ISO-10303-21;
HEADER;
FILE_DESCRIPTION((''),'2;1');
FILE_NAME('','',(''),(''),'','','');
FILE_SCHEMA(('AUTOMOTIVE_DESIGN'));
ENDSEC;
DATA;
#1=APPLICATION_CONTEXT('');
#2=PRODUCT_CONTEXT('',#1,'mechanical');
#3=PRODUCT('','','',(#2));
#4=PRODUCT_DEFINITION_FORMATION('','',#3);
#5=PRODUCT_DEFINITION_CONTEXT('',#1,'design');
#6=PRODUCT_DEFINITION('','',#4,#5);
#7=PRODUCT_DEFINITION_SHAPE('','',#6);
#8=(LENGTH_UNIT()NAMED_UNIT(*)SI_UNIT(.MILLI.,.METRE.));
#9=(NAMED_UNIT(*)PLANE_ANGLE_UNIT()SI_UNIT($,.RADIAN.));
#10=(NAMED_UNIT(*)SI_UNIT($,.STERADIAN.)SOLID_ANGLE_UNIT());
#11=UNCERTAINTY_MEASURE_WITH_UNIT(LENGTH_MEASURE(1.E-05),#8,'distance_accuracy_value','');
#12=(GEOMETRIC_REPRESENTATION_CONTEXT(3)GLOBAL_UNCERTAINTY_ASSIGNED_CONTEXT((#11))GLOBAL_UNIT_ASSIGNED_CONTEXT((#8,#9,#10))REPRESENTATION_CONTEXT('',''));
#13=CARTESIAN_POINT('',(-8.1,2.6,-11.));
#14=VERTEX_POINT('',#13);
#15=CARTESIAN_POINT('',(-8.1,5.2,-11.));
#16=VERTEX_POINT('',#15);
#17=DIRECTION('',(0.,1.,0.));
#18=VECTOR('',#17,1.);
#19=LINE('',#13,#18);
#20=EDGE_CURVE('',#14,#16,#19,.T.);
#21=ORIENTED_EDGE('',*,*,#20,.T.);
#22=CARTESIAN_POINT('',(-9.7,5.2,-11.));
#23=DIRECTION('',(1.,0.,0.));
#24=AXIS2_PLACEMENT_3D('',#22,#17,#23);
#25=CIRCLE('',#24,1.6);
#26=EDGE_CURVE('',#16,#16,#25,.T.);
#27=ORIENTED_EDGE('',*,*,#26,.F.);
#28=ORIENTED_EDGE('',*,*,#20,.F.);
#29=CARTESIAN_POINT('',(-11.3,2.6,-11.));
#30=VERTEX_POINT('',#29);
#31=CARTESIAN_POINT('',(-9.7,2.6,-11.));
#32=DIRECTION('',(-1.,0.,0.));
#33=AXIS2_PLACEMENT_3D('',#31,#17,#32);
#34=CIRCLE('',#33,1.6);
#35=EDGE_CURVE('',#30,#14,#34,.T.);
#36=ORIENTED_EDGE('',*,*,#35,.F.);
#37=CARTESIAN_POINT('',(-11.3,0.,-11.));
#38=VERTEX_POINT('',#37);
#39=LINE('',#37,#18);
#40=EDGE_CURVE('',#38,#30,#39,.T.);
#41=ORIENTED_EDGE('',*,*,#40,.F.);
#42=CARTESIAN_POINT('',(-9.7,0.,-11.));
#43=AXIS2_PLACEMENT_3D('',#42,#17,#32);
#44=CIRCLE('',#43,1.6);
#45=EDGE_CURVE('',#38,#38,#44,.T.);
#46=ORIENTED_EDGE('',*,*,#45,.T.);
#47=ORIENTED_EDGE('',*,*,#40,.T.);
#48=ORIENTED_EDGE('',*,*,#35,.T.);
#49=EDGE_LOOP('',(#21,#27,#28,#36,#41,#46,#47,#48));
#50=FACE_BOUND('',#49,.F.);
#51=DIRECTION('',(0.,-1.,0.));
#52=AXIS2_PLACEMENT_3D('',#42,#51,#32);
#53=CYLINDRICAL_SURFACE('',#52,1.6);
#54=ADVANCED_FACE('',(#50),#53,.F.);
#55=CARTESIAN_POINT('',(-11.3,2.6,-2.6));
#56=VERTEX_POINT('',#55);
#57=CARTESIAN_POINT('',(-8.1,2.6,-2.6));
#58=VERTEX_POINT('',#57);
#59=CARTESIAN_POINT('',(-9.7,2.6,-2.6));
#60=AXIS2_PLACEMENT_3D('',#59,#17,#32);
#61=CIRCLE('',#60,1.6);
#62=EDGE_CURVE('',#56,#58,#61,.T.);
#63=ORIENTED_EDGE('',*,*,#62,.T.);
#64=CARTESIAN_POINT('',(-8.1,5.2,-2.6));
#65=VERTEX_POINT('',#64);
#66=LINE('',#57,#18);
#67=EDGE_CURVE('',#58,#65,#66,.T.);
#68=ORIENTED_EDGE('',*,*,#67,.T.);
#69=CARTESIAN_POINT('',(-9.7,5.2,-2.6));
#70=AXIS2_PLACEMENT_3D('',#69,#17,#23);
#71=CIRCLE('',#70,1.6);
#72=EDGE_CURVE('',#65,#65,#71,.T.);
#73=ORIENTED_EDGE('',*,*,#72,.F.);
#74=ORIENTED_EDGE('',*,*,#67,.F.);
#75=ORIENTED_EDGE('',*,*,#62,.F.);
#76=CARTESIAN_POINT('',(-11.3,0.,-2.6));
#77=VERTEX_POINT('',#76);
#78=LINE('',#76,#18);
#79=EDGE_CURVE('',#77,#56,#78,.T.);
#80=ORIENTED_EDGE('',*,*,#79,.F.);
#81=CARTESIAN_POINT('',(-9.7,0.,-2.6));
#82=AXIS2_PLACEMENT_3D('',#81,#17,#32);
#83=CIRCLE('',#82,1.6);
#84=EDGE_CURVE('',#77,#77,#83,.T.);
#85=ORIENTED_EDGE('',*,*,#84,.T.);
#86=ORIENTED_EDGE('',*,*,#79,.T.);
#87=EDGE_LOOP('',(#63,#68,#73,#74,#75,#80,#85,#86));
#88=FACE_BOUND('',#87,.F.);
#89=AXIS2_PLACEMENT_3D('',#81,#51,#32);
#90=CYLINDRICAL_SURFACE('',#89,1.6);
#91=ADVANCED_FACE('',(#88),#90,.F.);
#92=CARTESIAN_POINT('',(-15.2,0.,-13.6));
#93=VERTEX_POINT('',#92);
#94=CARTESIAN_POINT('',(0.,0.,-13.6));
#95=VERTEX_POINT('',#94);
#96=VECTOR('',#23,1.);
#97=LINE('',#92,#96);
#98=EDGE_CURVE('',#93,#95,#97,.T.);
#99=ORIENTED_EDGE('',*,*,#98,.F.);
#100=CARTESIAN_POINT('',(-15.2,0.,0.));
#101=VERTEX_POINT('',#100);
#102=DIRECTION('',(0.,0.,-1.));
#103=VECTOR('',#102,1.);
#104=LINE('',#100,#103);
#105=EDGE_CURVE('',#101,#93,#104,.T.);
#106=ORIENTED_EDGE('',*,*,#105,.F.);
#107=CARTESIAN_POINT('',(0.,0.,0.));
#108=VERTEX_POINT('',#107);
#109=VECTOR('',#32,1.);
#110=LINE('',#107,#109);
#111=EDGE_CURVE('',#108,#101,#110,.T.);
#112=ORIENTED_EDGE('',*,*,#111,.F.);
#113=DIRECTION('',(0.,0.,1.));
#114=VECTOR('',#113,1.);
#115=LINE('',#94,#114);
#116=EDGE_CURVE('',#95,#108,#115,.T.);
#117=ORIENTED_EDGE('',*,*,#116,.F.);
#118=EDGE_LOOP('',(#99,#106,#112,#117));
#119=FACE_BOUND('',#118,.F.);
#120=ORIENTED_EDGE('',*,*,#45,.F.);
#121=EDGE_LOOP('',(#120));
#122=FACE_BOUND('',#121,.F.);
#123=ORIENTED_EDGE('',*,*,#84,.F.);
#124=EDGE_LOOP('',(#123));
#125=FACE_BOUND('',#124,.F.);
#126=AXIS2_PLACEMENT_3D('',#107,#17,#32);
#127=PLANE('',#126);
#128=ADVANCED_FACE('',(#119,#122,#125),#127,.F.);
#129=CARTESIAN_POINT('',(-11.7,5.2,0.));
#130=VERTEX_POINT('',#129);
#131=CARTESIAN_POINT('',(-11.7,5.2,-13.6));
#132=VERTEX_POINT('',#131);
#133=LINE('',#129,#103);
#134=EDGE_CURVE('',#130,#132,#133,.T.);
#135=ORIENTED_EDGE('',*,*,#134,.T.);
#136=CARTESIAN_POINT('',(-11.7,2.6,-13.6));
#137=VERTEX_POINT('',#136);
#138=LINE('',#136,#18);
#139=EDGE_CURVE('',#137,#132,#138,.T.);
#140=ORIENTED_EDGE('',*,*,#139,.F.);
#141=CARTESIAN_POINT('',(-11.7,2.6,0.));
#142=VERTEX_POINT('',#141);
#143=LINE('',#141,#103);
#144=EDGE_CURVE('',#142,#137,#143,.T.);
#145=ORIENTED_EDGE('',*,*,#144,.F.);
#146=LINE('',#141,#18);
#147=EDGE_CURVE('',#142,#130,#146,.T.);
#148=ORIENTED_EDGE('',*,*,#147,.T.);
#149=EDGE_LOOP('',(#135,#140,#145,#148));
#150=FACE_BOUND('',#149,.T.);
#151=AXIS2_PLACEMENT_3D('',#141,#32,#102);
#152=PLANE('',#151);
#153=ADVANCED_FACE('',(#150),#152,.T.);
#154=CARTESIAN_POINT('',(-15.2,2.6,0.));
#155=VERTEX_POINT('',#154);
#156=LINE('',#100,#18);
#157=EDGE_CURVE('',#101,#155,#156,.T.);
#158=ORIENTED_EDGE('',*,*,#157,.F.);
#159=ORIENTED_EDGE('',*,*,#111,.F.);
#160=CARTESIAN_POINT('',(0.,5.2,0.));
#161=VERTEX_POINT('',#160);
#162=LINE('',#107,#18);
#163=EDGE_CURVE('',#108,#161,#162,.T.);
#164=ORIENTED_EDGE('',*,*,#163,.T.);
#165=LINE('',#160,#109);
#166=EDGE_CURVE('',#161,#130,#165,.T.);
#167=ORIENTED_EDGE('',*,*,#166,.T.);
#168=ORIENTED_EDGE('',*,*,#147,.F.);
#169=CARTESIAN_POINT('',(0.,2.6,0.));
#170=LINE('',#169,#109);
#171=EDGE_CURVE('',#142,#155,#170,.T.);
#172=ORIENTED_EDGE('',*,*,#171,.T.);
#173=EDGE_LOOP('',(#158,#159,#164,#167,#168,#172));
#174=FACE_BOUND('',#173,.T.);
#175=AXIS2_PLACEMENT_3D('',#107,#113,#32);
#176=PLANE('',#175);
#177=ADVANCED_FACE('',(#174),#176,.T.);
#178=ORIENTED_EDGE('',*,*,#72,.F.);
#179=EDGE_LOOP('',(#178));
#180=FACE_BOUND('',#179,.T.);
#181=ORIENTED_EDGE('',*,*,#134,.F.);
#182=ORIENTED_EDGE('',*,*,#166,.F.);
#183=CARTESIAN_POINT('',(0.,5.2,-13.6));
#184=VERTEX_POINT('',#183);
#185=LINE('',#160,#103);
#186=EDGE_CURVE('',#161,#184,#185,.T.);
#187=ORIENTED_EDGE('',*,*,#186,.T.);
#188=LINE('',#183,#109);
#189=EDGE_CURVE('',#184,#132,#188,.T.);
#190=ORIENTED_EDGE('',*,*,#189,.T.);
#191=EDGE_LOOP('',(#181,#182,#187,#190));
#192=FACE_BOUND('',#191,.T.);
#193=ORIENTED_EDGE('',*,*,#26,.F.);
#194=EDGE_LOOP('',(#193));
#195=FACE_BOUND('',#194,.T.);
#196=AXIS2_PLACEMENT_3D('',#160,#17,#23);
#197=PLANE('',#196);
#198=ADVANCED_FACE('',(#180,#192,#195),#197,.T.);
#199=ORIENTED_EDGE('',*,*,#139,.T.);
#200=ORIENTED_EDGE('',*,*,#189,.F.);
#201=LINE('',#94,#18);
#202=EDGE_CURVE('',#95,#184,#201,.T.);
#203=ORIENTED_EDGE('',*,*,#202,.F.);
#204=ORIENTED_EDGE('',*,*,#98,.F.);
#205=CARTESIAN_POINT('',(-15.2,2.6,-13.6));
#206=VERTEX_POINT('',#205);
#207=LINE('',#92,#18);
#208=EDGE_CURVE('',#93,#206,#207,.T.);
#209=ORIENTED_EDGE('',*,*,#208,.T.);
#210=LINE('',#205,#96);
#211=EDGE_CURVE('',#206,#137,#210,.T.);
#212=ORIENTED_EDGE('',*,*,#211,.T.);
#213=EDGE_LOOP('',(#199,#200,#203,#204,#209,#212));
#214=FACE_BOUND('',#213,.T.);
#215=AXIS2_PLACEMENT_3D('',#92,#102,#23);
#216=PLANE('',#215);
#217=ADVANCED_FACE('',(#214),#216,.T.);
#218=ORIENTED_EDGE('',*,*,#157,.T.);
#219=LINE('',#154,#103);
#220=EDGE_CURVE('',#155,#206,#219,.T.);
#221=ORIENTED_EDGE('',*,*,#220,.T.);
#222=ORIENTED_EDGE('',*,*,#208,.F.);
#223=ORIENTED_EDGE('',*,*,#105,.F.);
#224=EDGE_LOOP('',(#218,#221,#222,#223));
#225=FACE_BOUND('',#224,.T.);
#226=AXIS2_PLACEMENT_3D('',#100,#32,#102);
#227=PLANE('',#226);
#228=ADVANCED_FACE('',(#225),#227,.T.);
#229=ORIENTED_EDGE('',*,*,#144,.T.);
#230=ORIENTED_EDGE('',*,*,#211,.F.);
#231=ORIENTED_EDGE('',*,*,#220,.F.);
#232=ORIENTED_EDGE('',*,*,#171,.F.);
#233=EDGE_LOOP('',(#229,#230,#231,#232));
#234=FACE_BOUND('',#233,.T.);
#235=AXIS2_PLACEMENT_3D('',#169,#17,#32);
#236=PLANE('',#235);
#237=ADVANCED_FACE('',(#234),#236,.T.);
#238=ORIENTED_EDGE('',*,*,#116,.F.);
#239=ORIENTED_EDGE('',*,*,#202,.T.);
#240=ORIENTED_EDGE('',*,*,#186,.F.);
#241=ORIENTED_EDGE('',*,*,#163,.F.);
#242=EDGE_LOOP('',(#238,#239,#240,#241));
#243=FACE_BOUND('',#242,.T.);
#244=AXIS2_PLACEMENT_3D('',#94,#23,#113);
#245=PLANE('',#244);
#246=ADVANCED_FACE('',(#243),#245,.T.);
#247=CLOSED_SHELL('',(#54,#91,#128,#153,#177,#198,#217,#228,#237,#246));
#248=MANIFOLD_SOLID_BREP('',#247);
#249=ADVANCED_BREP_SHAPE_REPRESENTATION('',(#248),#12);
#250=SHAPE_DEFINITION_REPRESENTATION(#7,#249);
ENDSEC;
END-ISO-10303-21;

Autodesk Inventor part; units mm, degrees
ref_plane "YZ Plane" through (0, 0, 0) normal (1, 0, 0) x (0, 1, 0)
ref_plane "XZ Plane" through (0, 0, 0) normal (0, 1, 0) x (-1, 0, 0)
ref_plane "XY Plane" through (0, 0, 0) normal (0, 0, 1) x (1, 0, 0)
sketch "Sketch1" plane through (0, 0, 0) normal (0, 1, 0) x (-1, 0, 0)
  line L0 (0, 0) -> (15.2, 0)
  line L1 (15.2, 0) -> (15.2, -13.6)
  line L2 (15.2, -13.6) -> (0, -13.6)
  line L3 (0, -13.6) -> (0, 0)
  circle A0 centre (9.7, -2.6) radius 1.6
  circle A1 centre (9.7, -11) radius 1.6
  line L4 (9.7, 0) -> (9.7, -13.6) construction
  dimension "d0" = 13.6
  dimension "d1" = 15.2
  dimension "d2" = 3.2
  dimension "d3" = 2.6
  dimension "d4" = 2.6
  dimension "d5" = 5.5
extrude "Extrusion1" add sketch "Sketch1" along normal blind 2.6
sketch "Sketch2" plane through (0, 2.6, 0) normal (0, 1, 0) x (1, 0, 0)
  line L0 (0, 0) -> (0, 13.6) projected
  line L1 (0, 13.6) -> (-15.2, 13.6) projected
  line L2 (0, 0) -> (-11.7, 0)
  line L3 (-11.7, 0) -> (-11.7, 13.6)
  line L4 (-11.7, 13.6) -> (0, 13.6)
  line L5 (0, 13.6) -> (0, 0)
  line L6 (-15.2, 13.6) -> (-15.2, 0) projected
  circle A0 centre (-9.7, 11) radius 1.6
  circle A1 centre (-9.7, 2.6) radius 1.6
  circle A2 centre (-9.7, 2.6) radius 1.6 projected
  circle A3 centre (-9.7, 11) radius 1.6 projected
  point P0 (-15.2, 6.8)
  dimension "d9" = 3.5
extrude "Extrusion3" add sketch "Sketch2" along normal blind 2.6
properties part number "micro usb pin cover"
